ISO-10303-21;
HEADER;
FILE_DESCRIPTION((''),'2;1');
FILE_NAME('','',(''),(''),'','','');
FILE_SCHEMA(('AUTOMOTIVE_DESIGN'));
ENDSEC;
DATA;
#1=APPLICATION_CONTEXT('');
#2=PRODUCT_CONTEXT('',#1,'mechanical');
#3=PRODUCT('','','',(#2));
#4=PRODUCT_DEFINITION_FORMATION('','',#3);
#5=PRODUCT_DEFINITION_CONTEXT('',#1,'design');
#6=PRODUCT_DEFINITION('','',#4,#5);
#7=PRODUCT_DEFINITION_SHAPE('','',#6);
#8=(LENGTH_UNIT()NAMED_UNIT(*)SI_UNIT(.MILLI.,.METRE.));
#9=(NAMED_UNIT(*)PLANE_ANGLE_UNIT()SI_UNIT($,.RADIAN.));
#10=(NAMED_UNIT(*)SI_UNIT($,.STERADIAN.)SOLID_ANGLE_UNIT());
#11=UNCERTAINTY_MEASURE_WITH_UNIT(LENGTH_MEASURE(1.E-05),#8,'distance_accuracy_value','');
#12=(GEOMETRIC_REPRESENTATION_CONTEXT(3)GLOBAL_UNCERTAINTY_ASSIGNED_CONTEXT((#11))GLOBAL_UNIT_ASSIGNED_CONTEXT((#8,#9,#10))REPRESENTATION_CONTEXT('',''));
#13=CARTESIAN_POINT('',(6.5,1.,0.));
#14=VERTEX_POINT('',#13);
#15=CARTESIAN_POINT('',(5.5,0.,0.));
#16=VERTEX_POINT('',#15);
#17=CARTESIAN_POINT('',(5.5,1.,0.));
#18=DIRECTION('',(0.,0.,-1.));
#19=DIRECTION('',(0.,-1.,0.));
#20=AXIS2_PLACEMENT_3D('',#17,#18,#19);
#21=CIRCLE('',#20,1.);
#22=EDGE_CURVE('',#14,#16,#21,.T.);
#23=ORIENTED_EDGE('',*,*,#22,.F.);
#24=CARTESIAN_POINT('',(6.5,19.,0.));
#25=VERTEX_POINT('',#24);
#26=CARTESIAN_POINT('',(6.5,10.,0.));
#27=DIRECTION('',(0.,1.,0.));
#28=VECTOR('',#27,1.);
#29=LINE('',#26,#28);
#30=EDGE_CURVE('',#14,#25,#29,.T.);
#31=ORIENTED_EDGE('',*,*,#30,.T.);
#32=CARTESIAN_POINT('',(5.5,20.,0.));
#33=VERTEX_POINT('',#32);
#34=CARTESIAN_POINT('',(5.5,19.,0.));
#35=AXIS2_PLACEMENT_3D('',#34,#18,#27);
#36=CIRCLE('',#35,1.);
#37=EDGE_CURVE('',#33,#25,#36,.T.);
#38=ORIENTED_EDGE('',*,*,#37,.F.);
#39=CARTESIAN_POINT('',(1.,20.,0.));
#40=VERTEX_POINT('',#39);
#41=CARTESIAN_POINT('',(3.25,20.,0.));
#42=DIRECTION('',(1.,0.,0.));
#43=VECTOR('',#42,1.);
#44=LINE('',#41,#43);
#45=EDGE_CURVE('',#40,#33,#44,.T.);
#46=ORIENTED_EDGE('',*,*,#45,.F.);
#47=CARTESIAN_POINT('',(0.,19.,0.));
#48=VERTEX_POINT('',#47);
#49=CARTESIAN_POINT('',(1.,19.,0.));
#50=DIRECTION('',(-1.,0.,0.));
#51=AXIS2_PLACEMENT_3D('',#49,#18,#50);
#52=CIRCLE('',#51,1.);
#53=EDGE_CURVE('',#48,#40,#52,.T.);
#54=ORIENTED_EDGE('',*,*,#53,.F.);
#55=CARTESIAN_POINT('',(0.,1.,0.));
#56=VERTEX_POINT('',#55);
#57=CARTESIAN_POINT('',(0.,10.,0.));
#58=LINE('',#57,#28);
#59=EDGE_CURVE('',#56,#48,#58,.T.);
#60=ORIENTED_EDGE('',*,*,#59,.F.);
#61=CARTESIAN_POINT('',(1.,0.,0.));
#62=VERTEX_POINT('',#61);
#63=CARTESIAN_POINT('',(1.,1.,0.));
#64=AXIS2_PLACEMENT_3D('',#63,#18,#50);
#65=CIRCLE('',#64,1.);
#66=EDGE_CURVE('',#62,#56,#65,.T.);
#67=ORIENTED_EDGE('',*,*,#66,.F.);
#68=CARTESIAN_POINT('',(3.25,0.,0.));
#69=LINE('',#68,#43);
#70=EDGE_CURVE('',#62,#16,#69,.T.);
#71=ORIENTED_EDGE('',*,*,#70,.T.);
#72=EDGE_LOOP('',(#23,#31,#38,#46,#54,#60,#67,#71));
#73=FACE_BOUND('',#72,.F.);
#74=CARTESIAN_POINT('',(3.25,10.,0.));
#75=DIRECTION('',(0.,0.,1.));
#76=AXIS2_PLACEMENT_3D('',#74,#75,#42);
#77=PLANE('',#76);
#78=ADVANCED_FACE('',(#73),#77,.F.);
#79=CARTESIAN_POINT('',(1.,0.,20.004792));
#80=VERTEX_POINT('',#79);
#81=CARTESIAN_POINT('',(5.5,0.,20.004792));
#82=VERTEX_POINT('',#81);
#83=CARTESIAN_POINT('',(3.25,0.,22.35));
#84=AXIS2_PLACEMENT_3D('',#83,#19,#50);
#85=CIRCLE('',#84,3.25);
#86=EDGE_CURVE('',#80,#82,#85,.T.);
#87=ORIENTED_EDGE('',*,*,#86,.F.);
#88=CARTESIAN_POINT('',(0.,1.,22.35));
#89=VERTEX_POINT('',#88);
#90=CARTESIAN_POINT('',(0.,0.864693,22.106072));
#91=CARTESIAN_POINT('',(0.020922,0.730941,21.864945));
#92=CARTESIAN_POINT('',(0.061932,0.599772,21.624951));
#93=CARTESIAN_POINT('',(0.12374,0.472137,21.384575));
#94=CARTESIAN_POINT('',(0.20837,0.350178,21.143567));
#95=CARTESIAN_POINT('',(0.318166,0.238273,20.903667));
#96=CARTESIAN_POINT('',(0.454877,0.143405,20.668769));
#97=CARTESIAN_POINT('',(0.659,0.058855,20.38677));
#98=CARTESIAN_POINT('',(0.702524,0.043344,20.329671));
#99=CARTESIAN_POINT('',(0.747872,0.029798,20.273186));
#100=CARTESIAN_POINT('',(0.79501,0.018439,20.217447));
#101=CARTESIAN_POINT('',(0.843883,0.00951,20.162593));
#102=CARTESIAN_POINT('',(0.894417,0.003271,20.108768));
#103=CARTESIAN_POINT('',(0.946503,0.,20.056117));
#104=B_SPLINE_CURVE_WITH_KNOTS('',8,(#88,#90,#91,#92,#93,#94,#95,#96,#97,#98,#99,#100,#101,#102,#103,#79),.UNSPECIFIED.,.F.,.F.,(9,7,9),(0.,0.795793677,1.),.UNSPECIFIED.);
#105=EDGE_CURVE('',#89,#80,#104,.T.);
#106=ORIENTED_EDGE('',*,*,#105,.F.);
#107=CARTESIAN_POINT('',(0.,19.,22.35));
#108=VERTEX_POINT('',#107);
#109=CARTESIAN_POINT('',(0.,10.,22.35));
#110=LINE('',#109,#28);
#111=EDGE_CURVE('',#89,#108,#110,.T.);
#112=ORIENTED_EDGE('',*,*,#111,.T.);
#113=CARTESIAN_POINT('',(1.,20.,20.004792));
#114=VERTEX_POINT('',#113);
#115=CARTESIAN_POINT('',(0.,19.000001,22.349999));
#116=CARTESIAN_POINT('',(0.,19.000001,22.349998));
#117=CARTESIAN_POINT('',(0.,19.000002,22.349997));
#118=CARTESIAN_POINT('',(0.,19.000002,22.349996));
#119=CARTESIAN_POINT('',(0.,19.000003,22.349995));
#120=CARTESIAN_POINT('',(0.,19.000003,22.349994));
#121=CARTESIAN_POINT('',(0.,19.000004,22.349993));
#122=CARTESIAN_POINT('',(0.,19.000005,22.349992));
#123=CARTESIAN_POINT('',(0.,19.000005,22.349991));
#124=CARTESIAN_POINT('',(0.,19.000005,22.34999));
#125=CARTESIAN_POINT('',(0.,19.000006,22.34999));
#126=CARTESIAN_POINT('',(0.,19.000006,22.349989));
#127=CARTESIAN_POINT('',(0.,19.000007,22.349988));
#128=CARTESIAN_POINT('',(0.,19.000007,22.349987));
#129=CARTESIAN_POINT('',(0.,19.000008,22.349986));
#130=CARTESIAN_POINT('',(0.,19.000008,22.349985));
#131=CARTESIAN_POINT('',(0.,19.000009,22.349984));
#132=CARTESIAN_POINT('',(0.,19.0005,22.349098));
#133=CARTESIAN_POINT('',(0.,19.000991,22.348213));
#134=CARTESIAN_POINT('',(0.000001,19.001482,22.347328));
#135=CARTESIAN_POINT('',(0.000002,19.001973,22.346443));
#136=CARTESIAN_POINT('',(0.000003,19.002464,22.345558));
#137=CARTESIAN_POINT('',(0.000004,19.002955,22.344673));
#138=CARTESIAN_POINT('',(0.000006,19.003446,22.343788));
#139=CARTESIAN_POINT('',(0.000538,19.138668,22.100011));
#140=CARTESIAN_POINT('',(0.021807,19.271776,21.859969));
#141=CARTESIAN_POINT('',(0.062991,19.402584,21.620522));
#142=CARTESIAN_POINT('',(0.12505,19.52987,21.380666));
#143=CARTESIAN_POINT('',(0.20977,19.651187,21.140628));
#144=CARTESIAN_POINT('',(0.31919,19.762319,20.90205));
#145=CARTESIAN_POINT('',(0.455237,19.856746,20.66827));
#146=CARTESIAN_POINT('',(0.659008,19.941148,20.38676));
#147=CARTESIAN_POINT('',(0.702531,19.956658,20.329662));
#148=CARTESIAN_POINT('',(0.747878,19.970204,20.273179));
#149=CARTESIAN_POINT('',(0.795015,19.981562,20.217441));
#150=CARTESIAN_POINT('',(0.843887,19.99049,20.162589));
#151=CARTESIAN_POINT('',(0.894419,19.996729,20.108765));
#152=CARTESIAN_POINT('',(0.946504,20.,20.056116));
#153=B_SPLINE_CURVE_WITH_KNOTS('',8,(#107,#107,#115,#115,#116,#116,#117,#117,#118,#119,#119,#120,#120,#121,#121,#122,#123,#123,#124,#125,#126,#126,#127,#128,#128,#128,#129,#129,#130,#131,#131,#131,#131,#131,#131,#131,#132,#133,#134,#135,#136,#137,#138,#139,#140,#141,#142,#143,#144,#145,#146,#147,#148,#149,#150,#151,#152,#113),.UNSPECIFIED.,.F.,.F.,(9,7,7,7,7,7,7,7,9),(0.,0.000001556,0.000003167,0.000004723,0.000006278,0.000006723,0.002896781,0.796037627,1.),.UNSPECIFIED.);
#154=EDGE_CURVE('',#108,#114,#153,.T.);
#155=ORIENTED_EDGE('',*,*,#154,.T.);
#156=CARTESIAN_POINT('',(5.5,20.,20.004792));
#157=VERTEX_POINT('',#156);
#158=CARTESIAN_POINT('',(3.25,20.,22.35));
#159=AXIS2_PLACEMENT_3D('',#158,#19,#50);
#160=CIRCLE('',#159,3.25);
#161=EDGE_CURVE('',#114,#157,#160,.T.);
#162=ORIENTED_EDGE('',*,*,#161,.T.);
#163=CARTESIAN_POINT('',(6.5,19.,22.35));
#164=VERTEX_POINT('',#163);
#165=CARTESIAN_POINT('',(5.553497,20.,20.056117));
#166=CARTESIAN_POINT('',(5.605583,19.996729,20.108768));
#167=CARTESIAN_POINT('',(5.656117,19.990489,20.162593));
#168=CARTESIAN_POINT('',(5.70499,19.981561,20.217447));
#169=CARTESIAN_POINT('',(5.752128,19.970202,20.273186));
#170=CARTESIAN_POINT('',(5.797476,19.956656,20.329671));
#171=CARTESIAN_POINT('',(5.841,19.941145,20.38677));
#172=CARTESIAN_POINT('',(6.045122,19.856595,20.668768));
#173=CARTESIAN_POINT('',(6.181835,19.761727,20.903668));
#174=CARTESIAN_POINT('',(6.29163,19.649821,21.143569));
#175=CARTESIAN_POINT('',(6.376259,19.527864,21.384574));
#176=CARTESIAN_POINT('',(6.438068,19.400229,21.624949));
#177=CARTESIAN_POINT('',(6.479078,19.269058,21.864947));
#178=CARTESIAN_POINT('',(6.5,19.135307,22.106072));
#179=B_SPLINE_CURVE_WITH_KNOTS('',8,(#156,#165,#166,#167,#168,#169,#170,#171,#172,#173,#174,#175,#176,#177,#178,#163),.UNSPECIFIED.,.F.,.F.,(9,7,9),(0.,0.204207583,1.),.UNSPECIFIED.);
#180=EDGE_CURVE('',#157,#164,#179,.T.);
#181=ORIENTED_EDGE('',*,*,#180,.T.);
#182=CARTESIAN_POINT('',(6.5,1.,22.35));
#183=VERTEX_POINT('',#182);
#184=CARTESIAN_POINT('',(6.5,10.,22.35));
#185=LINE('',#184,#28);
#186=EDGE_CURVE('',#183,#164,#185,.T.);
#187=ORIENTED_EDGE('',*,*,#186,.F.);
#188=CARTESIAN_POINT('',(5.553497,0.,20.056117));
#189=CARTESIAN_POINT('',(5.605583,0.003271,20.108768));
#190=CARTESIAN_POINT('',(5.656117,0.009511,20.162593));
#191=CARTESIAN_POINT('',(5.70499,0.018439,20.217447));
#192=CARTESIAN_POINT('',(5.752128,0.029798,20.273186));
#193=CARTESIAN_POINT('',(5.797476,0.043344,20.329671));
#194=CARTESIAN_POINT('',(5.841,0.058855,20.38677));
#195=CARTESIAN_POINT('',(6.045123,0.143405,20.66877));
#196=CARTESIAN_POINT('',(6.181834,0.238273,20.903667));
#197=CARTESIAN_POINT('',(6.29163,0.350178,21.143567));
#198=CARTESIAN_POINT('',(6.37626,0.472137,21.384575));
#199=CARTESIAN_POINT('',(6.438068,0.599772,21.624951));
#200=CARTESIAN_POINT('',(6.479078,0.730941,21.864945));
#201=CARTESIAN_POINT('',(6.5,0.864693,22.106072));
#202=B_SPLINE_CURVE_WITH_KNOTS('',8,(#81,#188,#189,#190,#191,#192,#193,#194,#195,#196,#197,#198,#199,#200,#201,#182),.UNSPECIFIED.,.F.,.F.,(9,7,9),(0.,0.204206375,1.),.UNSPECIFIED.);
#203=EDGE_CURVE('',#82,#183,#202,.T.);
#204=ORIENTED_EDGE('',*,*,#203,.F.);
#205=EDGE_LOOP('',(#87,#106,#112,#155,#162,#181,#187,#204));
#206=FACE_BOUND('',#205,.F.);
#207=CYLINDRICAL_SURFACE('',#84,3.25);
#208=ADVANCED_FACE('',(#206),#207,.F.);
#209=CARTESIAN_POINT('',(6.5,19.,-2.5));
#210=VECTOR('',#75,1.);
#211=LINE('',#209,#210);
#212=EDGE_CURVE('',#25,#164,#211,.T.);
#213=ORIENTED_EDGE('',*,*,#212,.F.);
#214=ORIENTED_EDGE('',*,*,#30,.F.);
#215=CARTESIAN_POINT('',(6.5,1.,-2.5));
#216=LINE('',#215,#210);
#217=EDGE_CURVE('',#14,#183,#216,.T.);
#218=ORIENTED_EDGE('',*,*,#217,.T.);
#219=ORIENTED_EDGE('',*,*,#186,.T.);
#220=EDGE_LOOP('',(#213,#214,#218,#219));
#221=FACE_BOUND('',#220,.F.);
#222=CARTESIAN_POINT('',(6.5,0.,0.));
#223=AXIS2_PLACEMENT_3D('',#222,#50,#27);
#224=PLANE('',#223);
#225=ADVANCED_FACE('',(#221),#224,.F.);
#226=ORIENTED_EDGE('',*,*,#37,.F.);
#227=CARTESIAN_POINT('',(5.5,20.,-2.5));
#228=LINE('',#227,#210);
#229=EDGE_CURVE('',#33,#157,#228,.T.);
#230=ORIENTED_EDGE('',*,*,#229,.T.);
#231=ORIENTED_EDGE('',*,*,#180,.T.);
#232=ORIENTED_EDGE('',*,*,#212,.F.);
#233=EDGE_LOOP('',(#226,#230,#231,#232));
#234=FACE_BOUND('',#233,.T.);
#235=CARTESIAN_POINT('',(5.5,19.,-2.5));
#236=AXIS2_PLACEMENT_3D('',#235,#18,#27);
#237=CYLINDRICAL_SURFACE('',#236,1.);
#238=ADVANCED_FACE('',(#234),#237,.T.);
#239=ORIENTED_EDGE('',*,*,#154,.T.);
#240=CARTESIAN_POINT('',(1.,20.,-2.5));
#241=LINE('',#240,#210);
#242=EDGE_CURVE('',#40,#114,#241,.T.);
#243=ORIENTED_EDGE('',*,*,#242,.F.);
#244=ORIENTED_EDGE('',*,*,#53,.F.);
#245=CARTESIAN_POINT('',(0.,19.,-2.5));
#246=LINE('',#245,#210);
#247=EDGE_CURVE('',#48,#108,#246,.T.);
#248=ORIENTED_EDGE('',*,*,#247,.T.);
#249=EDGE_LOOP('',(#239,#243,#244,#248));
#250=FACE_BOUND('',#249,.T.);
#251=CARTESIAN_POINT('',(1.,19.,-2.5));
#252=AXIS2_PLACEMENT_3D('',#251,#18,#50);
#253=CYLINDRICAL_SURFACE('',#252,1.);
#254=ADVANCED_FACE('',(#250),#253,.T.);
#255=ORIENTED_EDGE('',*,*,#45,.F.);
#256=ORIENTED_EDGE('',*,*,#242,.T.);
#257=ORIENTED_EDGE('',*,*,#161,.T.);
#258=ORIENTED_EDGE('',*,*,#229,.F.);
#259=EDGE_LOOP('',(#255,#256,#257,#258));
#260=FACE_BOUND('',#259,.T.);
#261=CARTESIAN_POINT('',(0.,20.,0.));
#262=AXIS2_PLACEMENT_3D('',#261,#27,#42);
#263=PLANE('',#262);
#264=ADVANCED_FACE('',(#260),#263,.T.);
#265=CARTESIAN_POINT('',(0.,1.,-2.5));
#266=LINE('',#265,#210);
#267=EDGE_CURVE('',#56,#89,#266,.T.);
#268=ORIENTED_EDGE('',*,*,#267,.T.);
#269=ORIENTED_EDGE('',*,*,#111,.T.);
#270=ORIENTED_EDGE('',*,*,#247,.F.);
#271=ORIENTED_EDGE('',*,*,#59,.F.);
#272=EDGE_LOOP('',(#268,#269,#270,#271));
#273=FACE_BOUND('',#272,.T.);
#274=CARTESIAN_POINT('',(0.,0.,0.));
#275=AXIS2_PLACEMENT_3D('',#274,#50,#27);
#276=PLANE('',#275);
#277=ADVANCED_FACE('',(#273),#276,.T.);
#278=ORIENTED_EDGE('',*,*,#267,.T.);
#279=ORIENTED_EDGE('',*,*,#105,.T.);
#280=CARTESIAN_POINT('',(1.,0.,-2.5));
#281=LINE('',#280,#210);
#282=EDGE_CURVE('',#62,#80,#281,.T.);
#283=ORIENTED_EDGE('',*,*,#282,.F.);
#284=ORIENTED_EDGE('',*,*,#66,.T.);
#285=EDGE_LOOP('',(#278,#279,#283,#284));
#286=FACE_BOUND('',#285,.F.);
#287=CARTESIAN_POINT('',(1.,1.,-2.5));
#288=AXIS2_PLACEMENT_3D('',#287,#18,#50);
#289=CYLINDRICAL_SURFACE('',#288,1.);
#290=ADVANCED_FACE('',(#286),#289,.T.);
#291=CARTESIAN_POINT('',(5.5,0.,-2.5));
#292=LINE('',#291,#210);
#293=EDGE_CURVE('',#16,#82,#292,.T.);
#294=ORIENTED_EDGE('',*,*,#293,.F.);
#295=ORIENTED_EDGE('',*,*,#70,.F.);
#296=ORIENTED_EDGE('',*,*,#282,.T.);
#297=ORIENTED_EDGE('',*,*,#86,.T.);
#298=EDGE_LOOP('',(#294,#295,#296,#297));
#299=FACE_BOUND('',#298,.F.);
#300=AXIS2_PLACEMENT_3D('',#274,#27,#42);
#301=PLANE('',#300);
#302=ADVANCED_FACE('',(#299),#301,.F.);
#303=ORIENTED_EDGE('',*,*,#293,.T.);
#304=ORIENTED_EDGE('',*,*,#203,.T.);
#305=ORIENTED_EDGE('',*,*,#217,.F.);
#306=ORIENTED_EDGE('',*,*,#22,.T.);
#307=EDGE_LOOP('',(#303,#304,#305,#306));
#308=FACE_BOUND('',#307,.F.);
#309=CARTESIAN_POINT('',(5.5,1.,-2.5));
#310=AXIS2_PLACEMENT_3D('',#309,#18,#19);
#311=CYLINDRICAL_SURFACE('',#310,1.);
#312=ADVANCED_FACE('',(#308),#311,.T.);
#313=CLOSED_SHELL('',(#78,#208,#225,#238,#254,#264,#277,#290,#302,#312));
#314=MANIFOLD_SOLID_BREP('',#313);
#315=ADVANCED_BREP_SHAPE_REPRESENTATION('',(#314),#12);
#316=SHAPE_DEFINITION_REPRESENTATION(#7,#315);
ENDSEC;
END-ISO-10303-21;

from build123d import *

# Parameters (mm, degrees)
F0_W        = 6.5
F0_H        = 20
F1_DEPTH    = 22.35
F3_DEPTH    = 25
F4_T1_DEPTH = 27.35


# Not quite as in the source:
# - a fillet or chamfer that OpenCascade refuses, or shapes differently, is made with other operations: its cross-section is extruded or revolved along the edge and cut away or added


with BuildPart() as f1:
    # F0 (on Top) → F1 (new body)
    with BuildSketch(Plane.XY):
        with Locations((3.25, 10)):
            Rectangle(F0_W, F0_H)
    extrude(amount=F1_DEPTH)

    # F2 (on face) → F3 (cut)
    with BuildSketch(Plane.XZ):
        with BuildLine():
            ThreePointArc((6.5, 22.35), (3.25, 25.6), (0, 22.35))
            Line((0, 22.35), (6.5, 22.35))
        make_face()
        with BuildLine():
            Line((6.5, 22.35), (0, 22.35))
            ThreePointArc((0, 22.35), (3.25, 19.1), (6.5, 22.35))
        make_face()
    extrude(amount=-F3_DEPTH, mode=Mode.SUBTRACT)

    # F4: fillet of radius 1 on 4 edges, made by hand

    # F4_s2 → F4_t1 (cut)
    with BuildSketch(Plane.XY.offset(-2.5)):
        with BuildLine():
            ThreePointArc((5.5, 0), (6.2071067812, 0.2928932188), (6.5, 1))
            Line((6.5, 1), (6.5, 0))
            Line((6.5, 0), (5.5, 0))
        make_face()
        with BuildLine():
            ThreePointArc((0, 1), (0.2928932188, 0.2928932188), (1, 0))
            Line((1, 0), (0, 0))
            Line((0, 0), (0, 1))
        make_face()
        with BuildLine():
            ThreePointArc((5.5, 20), (6.2071067812, 19.7071067812), (6.5, 19))
            Line((6.5, 19), (6.5, 20))
            Line((6.5, 20), (5.5, 20))
        make_face()
        with BuildLine():
            ThreePointArc((0, 19), (0.2928932188, 19.7071067812), (1, 20))
            Line((1, 20), (0, 20))
            Line((0, 20), (0, 19))
        make_face()
    extrude(amount=F4_T1_DEPTH, mode=Mode.SUBTRACT)


solid = f1.part
